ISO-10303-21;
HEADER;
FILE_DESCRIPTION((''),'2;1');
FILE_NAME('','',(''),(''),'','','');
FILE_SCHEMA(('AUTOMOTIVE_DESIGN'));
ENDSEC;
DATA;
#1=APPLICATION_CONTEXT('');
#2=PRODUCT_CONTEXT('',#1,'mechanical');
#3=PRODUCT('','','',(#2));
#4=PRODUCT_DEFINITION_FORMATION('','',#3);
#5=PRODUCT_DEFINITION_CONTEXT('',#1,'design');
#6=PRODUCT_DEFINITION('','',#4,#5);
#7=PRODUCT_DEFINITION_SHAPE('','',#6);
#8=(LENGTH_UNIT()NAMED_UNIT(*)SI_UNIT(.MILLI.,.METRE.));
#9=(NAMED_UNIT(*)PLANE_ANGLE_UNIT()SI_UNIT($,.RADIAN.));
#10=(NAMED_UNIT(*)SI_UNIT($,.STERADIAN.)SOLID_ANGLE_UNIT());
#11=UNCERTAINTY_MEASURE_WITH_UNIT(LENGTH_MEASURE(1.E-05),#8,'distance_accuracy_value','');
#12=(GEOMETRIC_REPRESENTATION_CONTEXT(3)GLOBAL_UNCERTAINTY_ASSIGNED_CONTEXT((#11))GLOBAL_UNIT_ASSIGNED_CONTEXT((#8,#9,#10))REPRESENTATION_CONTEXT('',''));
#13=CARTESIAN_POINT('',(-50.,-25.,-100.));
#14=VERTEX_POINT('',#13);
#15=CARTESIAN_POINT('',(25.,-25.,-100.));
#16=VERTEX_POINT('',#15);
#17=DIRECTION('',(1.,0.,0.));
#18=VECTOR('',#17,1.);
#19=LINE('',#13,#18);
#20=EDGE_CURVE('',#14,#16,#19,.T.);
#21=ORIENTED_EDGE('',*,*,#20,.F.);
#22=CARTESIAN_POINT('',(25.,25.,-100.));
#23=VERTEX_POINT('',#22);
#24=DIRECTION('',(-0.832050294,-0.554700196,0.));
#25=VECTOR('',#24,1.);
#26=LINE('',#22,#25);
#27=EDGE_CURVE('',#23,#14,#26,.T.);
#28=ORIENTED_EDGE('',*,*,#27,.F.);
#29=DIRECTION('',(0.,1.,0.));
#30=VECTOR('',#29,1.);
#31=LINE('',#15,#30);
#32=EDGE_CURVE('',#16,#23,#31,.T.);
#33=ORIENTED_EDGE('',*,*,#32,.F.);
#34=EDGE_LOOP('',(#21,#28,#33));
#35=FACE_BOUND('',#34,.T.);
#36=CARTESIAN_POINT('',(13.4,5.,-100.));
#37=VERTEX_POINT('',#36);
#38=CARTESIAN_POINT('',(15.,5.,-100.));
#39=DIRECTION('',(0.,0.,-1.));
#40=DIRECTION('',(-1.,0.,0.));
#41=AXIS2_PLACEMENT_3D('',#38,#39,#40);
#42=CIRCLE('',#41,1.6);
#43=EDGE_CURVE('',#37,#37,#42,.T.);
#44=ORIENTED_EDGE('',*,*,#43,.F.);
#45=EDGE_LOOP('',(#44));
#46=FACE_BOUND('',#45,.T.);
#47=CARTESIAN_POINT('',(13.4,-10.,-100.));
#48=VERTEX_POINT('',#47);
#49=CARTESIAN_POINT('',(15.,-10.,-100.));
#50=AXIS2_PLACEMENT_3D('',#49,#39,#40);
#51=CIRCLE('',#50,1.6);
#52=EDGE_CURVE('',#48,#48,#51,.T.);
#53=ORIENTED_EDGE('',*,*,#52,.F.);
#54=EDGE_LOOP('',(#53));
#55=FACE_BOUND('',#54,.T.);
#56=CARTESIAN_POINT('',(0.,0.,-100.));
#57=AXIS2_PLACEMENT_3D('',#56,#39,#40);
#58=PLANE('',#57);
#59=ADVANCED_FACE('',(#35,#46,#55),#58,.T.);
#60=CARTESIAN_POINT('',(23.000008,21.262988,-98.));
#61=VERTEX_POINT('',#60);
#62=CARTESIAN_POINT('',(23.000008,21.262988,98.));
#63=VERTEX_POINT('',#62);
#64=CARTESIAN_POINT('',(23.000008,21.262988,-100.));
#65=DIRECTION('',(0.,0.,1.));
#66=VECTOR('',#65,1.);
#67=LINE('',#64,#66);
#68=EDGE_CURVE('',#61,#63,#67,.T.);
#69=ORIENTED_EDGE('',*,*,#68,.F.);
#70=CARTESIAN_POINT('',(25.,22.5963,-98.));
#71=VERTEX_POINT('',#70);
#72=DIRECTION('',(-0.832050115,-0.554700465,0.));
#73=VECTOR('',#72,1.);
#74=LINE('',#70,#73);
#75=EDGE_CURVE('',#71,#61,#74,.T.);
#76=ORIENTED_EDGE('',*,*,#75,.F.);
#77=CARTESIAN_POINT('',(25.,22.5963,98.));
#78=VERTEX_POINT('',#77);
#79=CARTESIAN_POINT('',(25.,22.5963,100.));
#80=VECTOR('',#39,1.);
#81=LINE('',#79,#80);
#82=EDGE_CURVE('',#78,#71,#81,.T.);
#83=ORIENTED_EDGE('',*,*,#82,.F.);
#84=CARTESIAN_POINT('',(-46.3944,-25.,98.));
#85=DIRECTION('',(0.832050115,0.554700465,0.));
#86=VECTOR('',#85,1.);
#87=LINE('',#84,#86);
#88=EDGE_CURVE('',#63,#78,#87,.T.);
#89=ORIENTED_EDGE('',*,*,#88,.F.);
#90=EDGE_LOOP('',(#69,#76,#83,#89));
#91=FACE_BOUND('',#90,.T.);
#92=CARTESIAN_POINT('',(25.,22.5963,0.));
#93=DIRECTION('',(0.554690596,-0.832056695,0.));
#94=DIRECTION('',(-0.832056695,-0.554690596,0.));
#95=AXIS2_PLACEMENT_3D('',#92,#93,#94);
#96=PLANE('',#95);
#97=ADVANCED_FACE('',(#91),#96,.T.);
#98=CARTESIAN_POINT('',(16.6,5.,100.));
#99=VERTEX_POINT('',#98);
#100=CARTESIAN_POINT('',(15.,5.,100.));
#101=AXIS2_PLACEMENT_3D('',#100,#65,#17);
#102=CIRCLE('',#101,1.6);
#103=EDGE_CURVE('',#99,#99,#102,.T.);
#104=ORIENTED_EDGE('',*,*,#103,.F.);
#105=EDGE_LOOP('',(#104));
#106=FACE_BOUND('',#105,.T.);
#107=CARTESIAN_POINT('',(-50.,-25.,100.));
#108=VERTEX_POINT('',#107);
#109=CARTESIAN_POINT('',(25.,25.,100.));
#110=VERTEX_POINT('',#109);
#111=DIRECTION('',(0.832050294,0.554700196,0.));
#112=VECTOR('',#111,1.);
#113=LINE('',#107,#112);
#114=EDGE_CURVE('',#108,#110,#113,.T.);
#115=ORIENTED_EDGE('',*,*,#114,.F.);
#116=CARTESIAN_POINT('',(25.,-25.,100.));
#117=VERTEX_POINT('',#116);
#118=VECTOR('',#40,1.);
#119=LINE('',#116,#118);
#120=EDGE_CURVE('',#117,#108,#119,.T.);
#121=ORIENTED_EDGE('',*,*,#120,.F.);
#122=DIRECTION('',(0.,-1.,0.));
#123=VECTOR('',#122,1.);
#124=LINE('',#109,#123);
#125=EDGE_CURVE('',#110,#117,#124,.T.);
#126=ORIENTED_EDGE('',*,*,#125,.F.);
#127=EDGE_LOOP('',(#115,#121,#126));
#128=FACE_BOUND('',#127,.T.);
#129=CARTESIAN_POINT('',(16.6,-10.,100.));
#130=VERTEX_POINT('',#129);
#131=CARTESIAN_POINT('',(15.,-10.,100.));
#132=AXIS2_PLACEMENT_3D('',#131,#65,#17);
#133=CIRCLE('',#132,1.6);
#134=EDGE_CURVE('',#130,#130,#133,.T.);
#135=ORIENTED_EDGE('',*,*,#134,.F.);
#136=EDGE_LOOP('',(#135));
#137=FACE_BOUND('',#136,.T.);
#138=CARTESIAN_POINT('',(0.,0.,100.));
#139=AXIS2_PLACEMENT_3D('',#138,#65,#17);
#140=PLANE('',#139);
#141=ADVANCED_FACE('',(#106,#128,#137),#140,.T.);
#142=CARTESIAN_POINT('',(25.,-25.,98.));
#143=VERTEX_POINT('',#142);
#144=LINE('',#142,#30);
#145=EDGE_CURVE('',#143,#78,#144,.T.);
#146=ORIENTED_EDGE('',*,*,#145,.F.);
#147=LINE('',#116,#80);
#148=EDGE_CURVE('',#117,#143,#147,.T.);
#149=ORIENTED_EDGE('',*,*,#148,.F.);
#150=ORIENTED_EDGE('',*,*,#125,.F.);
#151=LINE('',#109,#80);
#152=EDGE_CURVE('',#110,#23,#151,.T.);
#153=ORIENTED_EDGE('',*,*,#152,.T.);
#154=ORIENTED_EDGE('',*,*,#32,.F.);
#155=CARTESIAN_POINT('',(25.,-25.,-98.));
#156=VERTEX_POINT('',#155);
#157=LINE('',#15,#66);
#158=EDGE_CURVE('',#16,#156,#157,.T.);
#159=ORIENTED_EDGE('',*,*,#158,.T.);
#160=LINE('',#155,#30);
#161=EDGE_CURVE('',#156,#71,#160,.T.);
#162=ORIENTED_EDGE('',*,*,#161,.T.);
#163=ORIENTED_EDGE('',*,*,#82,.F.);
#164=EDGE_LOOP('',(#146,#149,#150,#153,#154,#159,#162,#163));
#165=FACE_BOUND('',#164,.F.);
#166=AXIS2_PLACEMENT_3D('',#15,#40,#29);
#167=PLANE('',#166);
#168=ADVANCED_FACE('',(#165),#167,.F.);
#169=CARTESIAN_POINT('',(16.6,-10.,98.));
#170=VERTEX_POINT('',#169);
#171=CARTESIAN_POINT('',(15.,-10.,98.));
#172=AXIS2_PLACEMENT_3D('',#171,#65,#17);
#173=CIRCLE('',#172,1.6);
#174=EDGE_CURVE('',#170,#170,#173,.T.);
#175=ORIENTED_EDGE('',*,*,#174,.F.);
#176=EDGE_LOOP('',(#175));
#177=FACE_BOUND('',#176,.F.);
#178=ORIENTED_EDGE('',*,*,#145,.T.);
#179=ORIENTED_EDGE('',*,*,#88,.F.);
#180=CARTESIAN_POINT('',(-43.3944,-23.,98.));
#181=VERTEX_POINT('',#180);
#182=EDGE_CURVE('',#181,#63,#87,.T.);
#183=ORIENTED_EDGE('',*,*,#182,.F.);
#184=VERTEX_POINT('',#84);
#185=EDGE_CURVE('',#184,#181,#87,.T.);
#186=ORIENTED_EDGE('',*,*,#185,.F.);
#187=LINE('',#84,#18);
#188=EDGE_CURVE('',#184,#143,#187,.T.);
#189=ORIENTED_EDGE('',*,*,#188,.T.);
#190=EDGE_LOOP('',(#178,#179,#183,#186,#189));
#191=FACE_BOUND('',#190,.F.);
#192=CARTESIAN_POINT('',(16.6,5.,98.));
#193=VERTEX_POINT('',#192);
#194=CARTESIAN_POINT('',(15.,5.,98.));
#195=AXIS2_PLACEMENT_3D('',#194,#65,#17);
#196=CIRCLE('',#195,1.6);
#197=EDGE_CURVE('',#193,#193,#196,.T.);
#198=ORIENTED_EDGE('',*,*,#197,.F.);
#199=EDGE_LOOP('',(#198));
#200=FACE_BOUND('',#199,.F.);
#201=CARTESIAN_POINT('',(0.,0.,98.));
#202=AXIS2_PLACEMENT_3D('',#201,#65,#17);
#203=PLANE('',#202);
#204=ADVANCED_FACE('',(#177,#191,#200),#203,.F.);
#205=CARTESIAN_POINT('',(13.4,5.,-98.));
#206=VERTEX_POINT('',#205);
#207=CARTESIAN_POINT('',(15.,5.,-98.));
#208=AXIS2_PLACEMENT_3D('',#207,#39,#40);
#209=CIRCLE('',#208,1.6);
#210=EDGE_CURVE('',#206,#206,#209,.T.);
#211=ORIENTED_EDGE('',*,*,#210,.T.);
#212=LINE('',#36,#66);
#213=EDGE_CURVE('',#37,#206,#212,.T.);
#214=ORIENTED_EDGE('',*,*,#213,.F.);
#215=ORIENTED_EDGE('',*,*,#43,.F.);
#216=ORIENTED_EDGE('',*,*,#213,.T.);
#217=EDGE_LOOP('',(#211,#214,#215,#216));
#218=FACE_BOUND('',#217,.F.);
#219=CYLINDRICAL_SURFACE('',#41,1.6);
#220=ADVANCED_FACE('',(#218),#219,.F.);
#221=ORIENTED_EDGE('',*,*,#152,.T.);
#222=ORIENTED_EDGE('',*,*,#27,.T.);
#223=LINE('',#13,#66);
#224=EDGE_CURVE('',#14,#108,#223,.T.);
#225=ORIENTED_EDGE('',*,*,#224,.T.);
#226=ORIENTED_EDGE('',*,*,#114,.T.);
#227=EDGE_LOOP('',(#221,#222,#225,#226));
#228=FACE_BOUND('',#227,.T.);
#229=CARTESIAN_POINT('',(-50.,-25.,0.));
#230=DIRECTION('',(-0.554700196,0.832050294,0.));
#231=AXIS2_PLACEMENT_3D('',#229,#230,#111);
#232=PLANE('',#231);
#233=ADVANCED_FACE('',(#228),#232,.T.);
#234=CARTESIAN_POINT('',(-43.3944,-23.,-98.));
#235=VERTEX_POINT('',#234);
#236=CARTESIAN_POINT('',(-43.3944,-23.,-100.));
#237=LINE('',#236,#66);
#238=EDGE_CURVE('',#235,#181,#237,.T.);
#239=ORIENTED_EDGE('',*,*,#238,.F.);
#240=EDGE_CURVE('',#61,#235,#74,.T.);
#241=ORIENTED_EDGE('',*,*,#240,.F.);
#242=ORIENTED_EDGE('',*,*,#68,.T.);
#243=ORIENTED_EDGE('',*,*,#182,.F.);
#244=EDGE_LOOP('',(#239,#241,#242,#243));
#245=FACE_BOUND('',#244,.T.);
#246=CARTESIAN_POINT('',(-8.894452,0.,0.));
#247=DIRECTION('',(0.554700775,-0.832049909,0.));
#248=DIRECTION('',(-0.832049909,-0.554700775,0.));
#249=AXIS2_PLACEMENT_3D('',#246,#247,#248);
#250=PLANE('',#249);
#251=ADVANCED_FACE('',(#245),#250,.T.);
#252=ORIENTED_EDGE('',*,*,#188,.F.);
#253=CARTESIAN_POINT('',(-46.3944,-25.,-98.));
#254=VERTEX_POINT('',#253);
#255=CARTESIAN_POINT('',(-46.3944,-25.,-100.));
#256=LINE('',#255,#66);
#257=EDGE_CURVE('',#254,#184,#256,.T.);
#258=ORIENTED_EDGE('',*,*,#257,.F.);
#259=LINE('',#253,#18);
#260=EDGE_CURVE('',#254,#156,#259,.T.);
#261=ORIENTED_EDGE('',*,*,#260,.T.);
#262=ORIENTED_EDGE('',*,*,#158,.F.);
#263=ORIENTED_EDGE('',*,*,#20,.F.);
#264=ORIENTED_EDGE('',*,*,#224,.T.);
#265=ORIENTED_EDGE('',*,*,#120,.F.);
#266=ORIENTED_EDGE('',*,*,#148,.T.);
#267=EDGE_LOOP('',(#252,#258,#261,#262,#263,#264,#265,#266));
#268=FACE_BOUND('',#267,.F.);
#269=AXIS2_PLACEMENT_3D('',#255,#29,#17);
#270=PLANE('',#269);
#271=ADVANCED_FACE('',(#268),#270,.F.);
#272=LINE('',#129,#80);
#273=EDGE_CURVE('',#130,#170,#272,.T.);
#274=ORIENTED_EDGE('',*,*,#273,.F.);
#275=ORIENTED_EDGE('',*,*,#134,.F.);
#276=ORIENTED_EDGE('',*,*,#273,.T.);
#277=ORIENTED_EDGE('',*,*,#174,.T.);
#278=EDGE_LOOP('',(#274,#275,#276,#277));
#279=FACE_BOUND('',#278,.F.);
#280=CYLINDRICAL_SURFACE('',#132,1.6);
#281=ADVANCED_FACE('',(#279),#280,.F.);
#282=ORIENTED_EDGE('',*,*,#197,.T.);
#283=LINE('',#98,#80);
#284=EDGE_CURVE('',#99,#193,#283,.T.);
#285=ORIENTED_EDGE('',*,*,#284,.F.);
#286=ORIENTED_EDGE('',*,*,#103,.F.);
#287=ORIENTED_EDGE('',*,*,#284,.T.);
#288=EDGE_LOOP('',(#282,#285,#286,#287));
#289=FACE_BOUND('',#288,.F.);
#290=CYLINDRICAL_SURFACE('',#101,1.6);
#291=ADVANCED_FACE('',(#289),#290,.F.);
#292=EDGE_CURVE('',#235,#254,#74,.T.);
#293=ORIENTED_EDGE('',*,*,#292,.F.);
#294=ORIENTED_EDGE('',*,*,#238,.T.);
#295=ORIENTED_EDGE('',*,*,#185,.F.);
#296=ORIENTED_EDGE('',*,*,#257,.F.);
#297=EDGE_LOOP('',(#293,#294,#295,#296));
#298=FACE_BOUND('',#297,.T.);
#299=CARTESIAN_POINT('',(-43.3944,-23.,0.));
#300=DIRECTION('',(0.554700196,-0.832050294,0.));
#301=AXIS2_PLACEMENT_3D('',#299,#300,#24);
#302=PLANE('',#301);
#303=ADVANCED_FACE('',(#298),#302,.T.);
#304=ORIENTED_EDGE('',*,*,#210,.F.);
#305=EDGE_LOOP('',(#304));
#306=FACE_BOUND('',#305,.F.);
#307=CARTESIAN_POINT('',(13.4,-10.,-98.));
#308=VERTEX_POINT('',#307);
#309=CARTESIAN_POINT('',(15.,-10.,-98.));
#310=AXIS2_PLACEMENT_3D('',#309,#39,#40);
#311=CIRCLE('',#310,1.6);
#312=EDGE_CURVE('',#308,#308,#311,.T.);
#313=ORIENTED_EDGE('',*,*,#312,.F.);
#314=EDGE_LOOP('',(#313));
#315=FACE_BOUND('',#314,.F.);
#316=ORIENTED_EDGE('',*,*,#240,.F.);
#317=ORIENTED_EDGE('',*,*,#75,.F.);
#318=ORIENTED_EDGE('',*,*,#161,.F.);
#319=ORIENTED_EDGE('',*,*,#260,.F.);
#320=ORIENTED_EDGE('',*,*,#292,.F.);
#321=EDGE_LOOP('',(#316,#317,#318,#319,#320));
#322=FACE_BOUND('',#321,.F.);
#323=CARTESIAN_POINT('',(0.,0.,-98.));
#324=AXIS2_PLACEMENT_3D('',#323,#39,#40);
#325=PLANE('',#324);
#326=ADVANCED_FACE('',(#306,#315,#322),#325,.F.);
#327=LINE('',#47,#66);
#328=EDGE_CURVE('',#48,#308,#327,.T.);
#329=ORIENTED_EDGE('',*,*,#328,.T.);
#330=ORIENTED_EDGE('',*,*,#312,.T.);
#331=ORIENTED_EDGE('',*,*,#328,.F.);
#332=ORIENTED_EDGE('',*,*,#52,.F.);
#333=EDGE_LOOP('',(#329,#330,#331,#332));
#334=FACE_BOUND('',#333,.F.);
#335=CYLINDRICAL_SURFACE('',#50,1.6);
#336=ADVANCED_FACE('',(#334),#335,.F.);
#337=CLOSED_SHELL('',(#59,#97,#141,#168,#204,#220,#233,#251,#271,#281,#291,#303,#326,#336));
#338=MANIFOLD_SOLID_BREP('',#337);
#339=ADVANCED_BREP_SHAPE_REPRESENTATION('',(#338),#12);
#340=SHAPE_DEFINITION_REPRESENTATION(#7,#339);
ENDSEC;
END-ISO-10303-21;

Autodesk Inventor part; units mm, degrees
ref_plane "YZ Plane" through (0, 0, 0) normal (1, 0, 0) x (0, 1, 0)
ref_plane "XZ Plane" through (0, 0, 0) normal (0, 1, 0) x (-1, 0, 0)
ref_plane "XY Plane" through (0, 0, 0) normal (0, 0, 1) x (1, 0, 0)
sketch "Skizze1" plane through (0, 0, 0) normal (0, 0, 1) x (1, 0, 0)
  line L0 (-50, -25) -> (25, 25)
  line L1 (25, 25) -> (25, -25)
  line L2 (25, -25) -> (-50, -25)
  line L3 (0, 35) -> (0, -35) projected
  line L4 (-65, 0) -> (40, 0) projected
  line L5 (23, 21.263) -> (-43.3944, -23)
  line L6 (-43.3944, -23) -> (23, -23)
  line L7 (23, -23) -> (23, 21.263)
  line L8 (23, -23) -> (25, -23)
  line L9 (25, 22.5963) -> (23, 21.263)
  line L10 (-43.3944, -23) -> (-46.3944, -25)
  point P0 (0, 0)
  dimension "d0" = 50
  dimension "d1" = 75
  dimension "d2" = 25
  dimension "d3" = 25
  dimension "d4" = 2
extrude "Extrusion2" add sketch "Skizze1" along normal mid plane 200 contours L0 L4 L5 L10 L2 | L0 L3 L5 L4 | L0 L1 L9 L5 L3
sketch "Skizze2" plane through (0, 0, 100) normal (0, 0, 1) x (1, 0, 0)
  line L0 (-46.3944, -25) -> (25, 22.5963) projected
  line L1 (-46.3944, -25) -> (25, -25)
  line L2 (25, -25) -> (25, 22.5963)
  line L3 (25, 22.5963) -> (-46.3944, -25)
  line L4 (25, 25) -> (-50, -25) projected
  point P0 (0, 0)
extrude "Extrusion3" add sketch "Skizze2" against normal blind 2
sketch "Skizze3" plane through (0, 0, -100) normal (0, 0, -1) x (-1, 0, 0)
  line L0 (-25, 22.5963) -> (46.3944, -25) projected
  line L1 (46.3944, -25) -> (50, -25) projected
  line L2 (-25, 22.5963) -> (46.3944, -25)
  line L3 (46.3944, -25) -> (-25, -25)
  line L4 (-25, -25) -> (-25, 22.5963)
  line L5 (-25, -25) -> (-25, 25) projected
  point P0 (0, 0)
extrude "Extrusion4" add sketch "Skizze3" against normal blind 2
sketch "Skizze4" plane through (0, 0, 100) normal (0, 0, 1) x (1, 0, 0)
  circle A0 centre (15, 5) radius 1.6
  circle A1 centre (15, -10) radius 1.6
  line L0 (-50, -25) -> (25, -25) projected
  line L1 (25, -25) -> (25, 25) projected
  point P0 (0, 0)
  dimension "d13" = 3.2
  dimension "d14" = 3.2
  dimension "d15" = 15
  dimension "d16" = 15
  dimension "d17" = 10
  dimension "d18" = 10
extrude "Extrusion5" cut sketch "Skizze4" against normal up to surface (2 mm away)
sketch "Skizze5" plane through (0, 0, -100) normal (0, 0, -1) x (-1, 0, 0)
  circle A0 centre (-15, 5) radius 1.6
  circle A1 centre (-15, -10) radius 1.6
  line L0 (-25, 25) -> (-25, -25) projected
  line L1 (-25, -25) -> (50, -25) projected
  point P0 (0, 0)
  dimension "d21" = 3.2
  dimension "d22" = 3.2
  dimension "d23" = 10
  dimension "d24" = 10
  dimension "d25" = 15
  dimension "d26" = 15
extrude "Extrusion6" cut sketch "Skizze5" against normal up to surface (2 mm away)
properties part number "_3D-Druck"
